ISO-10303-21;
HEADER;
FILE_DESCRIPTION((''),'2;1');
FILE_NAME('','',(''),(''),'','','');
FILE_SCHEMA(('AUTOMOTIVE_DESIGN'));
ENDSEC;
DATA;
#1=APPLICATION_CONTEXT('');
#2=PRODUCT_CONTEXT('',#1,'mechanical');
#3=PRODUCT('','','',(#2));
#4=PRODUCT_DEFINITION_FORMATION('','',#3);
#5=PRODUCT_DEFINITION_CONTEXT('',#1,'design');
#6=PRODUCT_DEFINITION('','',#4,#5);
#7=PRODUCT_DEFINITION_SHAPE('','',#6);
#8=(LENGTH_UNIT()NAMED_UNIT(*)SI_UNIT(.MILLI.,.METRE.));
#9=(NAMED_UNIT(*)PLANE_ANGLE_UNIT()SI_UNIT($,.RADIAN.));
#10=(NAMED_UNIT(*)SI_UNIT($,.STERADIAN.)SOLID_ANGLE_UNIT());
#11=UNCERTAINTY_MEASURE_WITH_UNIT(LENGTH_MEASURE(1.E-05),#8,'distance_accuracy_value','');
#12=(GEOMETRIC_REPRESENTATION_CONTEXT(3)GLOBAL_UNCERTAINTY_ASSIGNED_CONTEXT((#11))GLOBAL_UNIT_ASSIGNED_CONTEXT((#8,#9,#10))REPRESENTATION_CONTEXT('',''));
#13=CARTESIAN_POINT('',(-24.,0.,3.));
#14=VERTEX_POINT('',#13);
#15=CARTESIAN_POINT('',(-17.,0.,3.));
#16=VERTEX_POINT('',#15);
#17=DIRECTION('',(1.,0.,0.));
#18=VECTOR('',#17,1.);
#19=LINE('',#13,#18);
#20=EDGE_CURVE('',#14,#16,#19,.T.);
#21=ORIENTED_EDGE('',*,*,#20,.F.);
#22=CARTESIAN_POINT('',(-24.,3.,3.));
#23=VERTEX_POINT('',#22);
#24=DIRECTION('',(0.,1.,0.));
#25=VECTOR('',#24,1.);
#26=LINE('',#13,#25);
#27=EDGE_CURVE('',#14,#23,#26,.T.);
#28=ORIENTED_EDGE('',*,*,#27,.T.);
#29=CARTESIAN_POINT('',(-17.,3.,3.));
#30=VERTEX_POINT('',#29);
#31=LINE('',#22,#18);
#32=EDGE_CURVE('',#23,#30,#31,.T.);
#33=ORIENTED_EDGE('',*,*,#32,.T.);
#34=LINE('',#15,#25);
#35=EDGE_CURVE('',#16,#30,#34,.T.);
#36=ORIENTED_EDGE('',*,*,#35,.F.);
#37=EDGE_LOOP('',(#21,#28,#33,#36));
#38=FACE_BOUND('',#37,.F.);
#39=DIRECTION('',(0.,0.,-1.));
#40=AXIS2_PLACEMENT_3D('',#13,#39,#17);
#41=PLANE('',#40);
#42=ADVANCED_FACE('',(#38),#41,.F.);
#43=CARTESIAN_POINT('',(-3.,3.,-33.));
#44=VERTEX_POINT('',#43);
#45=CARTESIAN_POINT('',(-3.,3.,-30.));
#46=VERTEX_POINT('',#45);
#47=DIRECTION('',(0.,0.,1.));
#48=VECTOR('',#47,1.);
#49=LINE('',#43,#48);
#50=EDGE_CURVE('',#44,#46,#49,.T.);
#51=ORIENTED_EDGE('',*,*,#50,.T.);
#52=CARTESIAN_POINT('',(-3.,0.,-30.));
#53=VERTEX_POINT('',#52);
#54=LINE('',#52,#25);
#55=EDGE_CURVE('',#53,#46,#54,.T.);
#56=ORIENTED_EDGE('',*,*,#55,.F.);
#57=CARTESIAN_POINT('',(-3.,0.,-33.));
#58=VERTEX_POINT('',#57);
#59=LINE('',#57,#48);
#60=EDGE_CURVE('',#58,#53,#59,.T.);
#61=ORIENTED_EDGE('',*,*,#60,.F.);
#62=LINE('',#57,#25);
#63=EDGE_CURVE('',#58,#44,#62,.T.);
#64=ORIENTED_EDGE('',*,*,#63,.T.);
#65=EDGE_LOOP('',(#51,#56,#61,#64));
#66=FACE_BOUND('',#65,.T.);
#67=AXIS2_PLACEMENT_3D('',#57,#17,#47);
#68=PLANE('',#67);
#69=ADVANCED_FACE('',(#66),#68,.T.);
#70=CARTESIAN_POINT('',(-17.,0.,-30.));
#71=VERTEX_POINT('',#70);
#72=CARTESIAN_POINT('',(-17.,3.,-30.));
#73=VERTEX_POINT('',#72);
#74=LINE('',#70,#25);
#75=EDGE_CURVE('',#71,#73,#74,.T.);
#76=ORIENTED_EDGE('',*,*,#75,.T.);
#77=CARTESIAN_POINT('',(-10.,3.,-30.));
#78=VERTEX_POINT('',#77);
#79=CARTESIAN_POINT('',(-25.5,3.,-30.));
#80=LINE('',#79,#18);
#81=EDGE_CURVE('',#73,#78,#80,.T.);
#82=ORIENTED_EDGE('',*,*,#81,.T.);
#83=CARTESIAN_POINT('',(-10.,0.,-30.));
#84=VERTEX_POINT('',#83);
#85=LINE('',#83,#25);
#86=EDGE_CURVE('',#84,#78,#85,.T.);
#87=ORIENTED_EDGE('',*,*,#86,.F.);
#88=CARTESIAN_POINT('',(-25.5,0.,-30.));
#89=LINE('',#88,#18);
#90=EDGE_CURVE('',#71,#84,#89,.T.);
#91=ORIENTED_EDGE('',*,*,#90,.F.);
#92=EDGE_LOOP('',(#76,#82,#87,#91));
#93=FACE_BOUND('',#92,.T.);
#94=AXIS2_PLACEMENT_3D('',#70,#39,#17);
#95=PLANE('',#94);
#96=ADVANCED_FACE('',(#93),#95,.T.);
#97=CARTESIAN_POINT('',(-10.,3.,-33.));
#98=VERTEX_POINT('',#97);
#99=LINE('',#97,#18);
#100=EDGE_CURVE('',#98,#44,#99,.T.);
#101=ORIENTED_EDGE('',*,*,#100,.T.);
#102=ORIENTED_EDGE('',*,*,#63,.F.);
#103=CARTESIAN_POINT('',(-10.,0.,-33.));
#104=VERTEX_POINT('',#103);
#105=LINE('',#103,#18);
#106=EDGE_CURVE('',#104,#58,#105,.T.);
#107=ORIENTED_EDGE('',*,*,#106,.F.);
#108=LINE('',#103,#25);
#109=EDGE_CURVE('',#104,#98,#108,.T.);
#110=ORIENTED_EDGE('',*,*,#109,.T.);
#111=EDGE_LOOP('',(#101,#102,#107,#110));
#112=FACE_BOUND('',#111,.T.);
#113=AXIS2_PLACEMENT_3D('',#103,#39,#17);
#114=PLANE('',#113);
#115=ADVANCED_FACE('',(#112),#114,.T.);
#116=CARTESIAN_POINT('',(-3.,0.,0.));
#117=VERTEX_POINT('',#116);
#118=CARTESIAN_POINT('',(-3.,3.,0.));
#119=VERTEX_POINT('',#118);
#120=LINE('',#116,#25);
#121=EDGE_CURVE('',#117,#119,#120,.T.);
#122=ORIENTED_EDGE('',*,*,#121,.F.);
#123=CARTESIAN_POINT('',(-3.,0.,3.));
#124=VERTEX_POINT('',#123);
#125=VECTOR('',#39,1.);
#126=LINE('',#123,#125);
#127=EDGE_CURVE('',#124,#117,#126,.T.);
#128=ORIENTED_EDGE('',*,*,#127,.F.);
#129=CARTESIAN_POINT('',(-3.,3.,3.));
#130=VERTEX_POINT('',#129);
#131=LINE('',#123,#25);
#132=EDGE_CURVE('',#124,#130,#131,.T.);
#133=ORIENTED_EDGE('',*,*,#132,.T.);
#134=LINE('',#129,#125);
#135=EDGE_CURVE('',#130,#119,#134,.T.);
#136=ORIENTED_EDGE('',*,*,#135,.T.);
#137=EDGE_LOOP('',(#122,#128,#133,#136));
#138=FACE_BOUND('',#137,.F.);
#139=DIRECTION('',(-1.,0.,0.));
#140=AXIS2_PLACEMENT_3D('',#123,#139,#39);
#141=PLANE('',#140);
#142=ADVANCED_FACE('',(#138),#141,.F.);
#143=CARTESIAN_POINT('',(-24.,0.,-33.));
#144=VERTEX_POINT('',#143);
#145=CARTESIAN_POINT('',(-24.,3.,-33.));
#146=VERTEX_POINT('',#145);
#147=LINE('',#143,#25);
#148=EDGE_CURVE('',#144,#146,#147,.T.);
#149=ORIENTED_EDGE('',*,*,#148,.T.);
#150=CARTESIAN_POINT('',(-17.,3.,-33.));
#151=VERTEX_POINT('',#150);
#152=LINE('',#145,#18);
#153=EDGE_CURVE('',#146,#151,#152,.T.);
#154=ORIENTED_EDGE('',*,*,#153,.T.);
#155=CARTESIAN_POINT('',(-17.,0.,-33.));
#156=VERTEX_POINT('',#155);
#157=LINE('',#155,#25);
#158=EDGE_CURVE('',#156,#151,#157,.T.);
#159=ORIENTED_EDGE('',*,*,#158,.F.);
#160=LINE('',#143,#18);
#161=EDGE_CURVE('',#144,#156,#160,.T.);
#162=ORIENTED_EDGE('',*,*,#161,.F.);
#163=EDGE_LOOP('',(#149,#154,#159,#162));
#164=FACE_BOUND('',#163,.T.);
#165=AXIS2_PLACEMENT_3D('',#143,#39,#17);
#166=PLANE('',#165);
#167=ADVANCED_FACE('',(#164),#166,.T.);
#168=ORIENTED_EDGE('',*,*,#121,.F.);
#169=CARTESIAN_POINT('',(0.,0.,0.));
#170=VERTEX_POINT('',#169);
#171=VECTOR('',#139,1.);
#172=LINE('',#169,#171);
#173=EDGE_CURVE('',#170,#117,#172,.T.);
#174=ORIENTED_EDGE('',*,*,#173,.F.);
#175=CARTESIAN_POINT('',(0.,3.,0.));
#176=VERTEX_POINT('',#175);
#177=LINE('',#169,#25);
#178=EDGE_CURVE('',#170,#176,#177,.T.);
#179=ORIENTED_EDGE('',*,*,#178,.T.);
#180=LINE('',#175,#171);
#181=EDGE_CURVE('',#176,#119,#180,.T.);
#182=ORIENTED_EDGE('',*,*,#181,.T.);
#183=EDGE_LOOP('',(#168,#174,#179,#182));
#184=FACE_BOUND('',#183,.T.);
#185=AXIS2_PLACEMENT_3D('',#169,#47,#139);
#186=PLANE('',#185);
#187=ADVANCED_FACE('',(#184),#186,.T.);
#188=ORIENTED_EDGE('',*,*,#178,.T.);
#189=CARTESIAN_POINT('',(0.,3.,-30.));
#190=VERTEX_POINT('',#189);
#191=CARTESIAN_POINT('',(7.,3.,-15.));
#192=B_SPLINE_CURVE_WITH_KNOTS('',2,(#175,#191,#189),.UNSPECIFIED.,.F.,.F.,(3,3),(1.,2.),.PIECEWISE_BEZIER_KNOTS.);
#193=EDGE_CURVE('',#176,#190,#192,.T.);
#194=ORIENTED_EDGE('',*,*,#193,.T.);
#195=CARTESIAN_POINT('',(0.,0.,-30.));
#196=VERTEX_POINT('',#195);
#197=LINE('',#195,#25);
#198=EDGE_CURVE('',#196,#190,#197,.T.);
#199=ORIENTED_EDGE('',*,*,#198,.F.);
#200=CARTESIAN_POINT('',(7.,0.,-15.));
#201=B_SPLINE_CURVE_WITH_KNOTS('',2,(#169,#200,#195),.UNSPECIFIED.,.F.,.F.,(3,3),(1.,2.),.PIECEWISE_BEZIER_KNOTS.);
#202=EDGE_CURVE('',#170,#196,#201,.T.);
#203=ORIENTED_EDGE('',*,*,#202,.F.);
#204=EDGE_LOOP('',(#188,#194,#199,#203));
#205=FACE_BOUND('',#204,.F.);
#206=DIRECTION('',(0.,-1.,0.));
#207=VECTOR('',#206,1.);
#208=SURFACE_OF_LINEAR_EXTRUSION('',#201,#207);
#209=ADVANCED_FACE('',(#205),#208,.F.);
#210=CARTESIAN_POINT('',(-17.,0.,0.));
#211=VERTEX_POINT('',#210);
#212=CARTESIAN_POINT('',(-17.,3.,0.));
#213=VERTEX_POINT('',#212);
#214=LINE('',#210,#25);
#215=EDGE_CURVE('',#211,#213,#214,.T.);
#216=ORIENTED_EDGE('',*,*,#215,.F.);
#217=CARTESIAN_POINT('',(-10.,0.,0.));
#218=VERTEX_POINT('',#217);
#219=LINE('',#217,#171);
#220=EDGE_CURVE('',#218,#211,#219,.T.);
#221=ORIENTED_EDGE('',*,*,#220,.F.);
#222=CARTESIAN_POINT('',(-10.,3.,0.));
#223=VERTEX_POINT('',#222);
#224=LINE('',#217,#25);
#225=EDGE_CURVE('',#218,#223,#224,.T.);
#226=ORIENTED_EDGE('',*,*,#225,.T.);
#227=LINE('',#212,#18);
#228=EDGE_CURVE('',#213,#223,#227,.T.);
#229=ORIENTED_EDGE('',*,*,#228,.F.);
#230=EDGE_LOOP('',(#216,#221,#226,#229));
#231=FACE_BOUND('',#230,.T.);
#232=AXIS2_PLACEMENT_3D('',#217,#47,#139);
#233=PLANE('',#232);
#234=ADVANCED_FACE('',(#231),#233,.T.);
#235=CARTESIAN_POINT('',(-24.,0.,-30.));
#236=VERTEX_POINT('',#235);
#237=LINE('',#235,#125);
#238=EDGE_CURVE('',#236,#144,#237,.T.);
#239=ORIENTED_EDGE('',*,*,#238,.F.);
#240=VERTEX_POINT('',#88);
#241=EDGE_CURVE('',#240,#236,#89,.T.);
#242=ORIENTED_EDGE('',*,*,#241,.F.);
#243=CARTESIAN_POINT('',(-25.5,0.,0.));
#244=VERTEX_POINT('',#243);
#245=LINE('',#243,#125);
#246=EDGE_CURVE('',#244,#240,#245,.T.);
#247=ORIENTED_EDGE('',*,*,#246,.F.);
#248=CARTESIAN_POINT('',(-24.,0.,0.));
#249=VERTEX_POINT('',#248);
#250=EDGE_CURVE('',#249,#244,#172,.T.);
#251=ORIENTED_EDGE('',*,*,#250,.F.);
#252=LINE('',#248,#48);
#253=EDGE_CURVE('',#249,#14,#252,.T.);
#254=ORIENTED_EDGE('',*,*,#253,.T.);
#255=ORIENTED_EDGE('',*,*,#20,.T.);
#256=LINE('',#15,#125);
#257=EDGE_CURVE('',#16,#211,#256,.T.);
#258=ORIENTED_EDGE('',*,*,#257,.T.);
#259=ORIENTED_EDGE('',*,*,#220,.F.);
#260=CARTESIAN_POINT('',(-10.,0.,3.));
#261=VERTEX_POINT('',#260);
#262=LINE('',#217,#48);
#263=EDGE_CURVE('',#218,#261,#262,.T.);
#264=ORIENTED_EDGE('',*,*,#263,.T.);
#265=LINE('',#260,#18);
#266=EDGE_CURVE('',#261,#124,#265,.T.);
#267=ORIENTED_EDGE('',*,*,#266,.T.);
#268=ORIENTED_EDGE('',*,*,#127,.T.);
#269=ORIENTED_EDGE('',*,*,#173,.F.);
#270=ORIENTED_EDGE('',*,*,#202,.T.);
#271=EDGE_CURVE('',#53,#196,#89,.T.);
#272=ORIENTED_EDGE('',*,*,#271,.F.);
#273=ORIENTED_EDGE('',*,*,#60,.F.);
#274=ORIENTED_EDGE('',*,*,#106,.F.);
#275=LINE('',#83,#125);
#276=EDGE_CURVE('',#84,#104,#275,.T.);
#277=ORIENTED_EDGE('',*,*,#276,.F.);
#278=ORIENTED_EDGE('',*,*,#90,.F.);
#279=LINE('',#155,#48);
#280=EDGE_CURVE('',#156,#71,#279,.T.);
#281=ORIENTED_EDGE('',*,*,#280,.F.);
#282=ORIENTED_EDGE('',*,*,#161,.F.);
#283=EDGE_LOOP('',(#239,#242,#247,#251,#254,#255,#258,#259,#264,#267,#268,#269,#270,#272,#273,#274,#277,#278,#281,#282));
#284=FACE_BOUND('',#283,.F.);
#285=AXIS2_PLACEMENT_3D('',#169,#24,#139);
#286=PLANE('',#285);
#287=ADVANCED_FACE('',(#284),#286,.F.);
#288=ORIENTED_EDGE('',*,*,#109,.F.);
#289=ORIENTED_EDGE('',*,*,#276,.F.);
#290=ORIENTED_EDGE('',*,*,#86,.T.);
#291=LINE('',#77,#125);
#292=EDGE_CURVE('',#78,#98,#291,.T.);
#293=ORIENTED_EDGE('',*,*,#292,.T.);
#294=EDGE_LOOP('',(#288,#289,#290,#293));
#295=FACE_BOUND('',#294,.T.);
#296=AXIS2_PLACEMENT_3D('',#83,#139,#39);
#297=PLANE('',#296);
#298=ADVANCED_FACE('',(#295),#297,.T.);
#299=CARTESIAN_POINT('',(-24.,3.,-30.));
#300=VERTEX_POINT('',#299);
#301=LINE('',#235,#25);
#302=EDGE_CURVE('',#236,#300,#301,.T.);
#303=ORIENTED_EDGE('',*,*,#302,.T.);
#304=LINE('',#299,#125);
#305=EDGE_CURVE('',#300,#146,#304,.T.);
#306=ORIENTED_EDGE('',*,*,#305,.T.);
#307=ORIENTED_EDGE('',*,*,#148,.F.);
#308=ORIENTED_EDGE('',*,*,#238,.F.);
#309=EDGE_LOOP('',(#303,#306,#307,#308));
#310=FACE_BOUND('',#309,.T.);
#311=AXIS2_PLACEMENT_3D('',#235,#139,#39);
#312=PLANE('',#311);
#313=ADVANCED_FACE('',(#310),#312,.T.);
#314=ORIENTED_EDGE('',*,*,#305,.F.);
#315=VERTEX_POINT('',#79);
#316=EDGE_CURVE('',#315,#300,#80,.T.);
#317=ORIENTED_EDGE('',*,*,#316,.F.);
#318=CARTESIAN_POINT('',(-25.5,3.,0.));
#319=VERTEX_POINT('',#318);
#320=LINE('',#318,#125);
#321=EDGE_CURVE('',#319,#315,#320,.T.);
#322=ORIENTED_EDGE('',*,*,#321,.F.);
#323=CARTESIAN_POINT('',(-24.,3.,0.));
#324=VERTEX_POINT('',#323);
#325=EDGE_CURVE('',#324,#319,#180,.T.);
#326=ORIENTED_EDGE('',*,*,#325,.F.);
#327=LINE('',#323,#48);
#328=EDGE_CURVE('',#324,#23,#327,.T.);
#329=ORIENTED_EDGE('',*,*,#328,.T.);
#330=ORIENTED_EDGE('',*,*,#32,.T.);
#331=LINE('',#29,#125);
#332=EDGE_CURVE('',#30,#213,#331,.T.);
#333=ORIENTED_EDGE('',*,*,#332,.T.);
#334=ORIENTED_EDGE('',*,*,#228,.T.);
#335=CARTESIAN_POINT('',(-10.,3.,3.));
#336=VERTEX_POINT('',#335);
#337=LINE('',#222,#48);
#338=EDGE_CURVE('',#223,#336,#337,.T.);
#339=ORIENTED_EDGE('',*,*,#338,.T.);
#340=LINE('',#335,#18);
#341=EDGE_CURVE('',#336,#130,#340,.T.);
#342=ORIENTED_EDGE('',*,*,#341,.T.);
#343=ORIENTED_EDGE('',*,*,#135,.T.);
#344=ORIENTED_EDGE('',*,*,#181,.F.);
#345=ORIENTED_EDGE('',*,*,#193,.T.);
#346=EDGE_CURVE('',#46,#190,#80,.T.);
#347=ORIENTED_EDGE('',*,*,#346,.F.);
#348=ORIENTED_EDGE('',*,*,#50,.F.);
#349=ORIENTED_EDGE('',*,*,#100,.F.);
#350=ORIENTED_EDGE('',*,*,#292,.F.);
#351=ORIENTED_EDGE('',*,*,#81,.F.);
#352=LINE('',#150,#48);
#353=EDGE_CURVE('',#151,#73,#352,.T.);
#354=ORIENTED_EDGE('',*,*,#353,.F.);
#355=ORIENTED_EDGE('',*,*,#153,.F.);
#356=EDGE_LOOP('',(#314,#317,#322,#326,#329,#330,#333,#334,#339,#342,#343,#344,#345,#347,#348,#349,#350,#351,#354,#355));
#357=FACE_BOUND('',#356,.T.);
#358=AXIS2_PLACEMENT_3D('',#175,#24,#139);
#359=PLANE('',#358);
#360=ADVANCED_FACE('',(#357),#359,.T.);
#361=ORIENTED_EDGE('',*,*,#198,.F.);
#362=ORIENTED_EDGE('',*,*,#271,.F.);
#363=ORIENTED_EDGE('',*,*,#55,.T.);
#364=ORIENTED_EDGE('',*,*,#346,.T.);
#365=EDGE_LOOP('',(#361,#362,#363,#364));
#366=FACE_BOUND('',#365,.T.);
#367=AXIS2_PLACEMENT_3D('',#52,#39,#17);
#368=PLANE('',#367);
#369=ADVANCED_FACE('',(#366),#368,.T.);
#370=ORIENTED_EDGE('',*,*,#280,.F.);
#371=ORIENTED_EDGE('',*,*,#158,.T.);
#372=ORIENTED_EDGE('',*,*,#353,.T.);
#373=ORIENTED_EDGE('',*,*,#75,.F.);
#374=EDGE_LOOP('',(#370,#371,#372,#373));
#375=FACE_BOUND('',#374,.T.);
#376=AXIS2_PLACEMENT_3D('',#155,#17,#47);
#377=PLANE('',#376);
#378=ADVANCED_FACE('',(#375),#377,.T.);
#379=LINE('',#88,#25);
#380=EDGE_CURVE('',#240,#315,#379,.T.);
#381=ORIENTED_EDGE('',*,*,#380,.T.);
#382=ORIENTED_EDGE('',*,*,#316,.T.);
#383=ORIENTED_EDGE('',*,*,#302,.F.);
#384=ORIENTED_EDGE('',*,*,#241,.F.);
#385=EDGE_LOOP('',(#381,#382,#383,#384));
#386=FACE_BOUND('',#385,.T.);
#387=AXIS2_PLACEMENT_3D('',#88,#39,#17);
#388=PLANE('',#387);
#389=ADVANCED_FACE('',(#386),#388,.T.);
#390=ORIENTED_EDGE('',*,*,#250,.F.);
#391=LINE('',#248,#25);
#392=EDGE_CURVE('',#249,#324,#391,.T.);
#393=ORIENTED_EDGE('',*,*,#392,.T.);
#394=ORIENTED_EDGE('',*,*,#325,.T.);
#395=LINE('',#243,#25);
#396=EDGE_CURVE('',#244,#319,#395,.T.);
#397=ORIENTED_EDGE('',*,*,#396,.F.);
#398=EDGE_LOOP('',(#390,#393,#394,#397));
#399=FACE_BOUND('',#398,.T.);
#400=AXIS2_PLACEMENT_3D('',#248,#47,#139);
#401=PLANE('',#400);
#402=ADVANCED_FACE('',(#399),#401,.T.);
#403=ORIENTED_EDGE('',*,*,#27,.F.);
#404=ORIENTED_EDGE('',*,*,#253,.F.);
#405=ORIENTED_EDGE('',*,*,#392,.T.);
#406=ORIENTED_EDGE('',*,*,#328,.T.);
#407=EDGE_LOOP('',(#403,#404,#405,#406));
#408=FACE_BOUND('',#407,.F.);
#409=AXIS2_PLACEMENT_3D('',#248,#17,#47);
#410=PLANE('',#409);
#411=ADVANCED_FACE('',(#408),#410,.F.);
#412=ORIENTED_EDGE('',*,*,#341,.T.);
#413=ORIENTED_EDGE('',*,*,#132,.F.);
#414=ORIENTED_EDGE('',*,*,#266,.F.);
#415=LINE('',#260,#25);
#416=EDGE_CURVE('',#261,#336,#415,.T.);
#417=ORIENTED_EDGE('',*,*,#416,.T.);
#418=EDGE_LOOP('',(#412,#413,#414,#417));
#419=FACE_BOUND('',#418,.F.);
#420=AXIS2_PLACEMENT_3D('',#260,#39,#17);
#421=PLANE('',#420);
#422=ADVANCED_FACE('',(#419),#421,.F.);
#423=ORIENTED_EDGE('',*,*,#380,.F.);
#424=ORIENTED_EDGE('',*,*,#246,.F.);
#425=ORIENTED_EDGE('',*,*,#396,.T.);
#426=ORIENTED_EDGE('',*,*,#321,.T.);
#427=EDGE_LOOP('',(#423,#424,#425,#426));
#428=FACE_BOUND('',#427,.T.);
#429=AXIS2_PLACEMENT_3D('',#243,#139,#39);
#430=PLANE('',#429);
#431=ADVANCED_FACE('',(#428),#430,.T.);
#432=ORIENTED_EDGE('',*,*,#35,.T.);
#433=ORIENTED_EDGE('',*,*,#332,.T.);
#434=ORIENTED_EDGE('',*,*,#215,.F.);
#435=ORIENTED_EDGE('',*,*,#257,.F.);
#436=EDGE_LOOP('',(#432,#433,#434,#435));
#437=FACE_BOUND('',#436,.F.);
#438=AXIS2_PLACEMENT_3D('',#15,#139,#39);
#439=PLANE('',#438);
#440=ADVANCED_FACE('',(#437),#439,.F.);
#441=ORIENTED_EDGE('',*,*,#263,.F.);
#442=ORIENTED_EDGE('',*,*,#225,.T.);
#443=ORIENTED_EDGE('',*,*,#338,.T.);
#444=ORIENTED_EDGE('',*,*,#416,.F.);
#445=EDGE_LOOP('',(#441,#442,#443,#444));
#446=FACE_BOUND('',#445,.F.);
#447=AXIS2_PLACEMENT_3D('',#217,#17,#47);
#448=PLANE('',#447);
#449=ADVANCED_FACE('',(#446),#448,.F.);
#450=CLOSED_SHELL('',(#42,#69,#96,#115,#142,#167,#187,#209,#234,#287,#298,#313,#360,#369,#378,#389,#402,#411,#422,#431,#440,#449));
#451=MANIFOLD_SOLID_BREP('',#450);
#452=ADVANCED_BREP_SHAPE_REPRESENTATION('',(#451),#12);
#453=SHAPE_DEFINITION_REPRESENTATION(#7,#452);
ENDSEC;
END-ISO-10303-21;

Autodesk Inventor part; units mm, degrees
ref_plane "YZ Plane" through (0, 0, 0) normal (1, 0, 0) x (0, 1, 0)
ref_plane "XZ Plane" through (0, 0, 0) normal (0, 1, 0) x (-1, 0, 0)
ref_plane "XY Plane" through (0, 0, 0) normal (0, 0, 1) x (1, 0, 0)
sketch "Esquisse1" plane through (0, 0, 0) normal (0, 1, 0) x (-1, 0, 0)
  line L0 (0, 0) -> (25.5, 0)
  line L1 (25.5, 0) -> (25.5, -30)
  line L2 (25.5, -30) -> (0, -30)
  line L3 (0, -30) -> (0, 0)
  line L4 (3, 0) -> (10, 0)
  line L5 (10, 0) -> (10, 3)
  line L6 (10, 3) -> (3, 3)
  line L7 (3, 3) -> (3, 0)
  line L8 (25.5, -15) -> (0, -15) construction
  line L9 (14, 0) -> (39.5, 0)
  line L10 (17, 0) -> (24, 0)
  line L11 (24, 0) -> (24, 3)
  line L12 (24, 3) -> (17, 3)
  line L13 (17, 3) -> (17, 0)
  line L14 (3, -30) -> (10, -30)
  line L15 (10, -30) -> (10, -33)
  line L16 (10, -33) -> (3, -33)
  line L17 (3, -33) -> (3, -30)
  line L18 (17, -30) -> (24, -30)
  line L19 (24, -30) -> (24, -33)
  line L20 (24, -33) -> (17, -33)
  line L21 (17, -33) -> (17, -30)
  line L22 (0, 0) -> (-7, -15) construction
  line L23 (-7, -15) -> (0, -30) construction
  spline S0 degree 2 poles (0, 0) (-7, -15) (0, -30) knots 1 1 1 2 2 2
  line L24 (-7, -15) -> (0, -15) construction
  point P0 (14, -30)
  dimension "d0" = 30
  dimension "d1" = 3
  dimension "d2" = 7
  dimension "d3" = 3
  dimension "d6" = 14
  dimension "d11" = 1.5
  dimension "d12" = 7
extrude "Plaque1" add sketch "Esquisse1" along normal blind 3
equation "\"d6\" = 2 * d2"
equation "\"LargeurGrugeage\" = Epaisseur"
equation "\"ProfondeurGrugeage\" = 0.5 * Epaisseur"
equation "\"TailleGrugeage\" = 4 * Epaisseur"
equation "\"RestesMinimum\" = 2 * Epaisseur"
equation "\"Rayondetransition\" = RayonPli"
equation "\"TailleRayonJacobi\" = RayonPli"
equation "\"TailleJeu\" = Epaisseur"
equation "\"d13\" = RayonPli"
equation "\"Epaisseur\" = 3"
equation "\"RayonPli\" = 4"
properties part number "tip" material "Plastique PMMA"
